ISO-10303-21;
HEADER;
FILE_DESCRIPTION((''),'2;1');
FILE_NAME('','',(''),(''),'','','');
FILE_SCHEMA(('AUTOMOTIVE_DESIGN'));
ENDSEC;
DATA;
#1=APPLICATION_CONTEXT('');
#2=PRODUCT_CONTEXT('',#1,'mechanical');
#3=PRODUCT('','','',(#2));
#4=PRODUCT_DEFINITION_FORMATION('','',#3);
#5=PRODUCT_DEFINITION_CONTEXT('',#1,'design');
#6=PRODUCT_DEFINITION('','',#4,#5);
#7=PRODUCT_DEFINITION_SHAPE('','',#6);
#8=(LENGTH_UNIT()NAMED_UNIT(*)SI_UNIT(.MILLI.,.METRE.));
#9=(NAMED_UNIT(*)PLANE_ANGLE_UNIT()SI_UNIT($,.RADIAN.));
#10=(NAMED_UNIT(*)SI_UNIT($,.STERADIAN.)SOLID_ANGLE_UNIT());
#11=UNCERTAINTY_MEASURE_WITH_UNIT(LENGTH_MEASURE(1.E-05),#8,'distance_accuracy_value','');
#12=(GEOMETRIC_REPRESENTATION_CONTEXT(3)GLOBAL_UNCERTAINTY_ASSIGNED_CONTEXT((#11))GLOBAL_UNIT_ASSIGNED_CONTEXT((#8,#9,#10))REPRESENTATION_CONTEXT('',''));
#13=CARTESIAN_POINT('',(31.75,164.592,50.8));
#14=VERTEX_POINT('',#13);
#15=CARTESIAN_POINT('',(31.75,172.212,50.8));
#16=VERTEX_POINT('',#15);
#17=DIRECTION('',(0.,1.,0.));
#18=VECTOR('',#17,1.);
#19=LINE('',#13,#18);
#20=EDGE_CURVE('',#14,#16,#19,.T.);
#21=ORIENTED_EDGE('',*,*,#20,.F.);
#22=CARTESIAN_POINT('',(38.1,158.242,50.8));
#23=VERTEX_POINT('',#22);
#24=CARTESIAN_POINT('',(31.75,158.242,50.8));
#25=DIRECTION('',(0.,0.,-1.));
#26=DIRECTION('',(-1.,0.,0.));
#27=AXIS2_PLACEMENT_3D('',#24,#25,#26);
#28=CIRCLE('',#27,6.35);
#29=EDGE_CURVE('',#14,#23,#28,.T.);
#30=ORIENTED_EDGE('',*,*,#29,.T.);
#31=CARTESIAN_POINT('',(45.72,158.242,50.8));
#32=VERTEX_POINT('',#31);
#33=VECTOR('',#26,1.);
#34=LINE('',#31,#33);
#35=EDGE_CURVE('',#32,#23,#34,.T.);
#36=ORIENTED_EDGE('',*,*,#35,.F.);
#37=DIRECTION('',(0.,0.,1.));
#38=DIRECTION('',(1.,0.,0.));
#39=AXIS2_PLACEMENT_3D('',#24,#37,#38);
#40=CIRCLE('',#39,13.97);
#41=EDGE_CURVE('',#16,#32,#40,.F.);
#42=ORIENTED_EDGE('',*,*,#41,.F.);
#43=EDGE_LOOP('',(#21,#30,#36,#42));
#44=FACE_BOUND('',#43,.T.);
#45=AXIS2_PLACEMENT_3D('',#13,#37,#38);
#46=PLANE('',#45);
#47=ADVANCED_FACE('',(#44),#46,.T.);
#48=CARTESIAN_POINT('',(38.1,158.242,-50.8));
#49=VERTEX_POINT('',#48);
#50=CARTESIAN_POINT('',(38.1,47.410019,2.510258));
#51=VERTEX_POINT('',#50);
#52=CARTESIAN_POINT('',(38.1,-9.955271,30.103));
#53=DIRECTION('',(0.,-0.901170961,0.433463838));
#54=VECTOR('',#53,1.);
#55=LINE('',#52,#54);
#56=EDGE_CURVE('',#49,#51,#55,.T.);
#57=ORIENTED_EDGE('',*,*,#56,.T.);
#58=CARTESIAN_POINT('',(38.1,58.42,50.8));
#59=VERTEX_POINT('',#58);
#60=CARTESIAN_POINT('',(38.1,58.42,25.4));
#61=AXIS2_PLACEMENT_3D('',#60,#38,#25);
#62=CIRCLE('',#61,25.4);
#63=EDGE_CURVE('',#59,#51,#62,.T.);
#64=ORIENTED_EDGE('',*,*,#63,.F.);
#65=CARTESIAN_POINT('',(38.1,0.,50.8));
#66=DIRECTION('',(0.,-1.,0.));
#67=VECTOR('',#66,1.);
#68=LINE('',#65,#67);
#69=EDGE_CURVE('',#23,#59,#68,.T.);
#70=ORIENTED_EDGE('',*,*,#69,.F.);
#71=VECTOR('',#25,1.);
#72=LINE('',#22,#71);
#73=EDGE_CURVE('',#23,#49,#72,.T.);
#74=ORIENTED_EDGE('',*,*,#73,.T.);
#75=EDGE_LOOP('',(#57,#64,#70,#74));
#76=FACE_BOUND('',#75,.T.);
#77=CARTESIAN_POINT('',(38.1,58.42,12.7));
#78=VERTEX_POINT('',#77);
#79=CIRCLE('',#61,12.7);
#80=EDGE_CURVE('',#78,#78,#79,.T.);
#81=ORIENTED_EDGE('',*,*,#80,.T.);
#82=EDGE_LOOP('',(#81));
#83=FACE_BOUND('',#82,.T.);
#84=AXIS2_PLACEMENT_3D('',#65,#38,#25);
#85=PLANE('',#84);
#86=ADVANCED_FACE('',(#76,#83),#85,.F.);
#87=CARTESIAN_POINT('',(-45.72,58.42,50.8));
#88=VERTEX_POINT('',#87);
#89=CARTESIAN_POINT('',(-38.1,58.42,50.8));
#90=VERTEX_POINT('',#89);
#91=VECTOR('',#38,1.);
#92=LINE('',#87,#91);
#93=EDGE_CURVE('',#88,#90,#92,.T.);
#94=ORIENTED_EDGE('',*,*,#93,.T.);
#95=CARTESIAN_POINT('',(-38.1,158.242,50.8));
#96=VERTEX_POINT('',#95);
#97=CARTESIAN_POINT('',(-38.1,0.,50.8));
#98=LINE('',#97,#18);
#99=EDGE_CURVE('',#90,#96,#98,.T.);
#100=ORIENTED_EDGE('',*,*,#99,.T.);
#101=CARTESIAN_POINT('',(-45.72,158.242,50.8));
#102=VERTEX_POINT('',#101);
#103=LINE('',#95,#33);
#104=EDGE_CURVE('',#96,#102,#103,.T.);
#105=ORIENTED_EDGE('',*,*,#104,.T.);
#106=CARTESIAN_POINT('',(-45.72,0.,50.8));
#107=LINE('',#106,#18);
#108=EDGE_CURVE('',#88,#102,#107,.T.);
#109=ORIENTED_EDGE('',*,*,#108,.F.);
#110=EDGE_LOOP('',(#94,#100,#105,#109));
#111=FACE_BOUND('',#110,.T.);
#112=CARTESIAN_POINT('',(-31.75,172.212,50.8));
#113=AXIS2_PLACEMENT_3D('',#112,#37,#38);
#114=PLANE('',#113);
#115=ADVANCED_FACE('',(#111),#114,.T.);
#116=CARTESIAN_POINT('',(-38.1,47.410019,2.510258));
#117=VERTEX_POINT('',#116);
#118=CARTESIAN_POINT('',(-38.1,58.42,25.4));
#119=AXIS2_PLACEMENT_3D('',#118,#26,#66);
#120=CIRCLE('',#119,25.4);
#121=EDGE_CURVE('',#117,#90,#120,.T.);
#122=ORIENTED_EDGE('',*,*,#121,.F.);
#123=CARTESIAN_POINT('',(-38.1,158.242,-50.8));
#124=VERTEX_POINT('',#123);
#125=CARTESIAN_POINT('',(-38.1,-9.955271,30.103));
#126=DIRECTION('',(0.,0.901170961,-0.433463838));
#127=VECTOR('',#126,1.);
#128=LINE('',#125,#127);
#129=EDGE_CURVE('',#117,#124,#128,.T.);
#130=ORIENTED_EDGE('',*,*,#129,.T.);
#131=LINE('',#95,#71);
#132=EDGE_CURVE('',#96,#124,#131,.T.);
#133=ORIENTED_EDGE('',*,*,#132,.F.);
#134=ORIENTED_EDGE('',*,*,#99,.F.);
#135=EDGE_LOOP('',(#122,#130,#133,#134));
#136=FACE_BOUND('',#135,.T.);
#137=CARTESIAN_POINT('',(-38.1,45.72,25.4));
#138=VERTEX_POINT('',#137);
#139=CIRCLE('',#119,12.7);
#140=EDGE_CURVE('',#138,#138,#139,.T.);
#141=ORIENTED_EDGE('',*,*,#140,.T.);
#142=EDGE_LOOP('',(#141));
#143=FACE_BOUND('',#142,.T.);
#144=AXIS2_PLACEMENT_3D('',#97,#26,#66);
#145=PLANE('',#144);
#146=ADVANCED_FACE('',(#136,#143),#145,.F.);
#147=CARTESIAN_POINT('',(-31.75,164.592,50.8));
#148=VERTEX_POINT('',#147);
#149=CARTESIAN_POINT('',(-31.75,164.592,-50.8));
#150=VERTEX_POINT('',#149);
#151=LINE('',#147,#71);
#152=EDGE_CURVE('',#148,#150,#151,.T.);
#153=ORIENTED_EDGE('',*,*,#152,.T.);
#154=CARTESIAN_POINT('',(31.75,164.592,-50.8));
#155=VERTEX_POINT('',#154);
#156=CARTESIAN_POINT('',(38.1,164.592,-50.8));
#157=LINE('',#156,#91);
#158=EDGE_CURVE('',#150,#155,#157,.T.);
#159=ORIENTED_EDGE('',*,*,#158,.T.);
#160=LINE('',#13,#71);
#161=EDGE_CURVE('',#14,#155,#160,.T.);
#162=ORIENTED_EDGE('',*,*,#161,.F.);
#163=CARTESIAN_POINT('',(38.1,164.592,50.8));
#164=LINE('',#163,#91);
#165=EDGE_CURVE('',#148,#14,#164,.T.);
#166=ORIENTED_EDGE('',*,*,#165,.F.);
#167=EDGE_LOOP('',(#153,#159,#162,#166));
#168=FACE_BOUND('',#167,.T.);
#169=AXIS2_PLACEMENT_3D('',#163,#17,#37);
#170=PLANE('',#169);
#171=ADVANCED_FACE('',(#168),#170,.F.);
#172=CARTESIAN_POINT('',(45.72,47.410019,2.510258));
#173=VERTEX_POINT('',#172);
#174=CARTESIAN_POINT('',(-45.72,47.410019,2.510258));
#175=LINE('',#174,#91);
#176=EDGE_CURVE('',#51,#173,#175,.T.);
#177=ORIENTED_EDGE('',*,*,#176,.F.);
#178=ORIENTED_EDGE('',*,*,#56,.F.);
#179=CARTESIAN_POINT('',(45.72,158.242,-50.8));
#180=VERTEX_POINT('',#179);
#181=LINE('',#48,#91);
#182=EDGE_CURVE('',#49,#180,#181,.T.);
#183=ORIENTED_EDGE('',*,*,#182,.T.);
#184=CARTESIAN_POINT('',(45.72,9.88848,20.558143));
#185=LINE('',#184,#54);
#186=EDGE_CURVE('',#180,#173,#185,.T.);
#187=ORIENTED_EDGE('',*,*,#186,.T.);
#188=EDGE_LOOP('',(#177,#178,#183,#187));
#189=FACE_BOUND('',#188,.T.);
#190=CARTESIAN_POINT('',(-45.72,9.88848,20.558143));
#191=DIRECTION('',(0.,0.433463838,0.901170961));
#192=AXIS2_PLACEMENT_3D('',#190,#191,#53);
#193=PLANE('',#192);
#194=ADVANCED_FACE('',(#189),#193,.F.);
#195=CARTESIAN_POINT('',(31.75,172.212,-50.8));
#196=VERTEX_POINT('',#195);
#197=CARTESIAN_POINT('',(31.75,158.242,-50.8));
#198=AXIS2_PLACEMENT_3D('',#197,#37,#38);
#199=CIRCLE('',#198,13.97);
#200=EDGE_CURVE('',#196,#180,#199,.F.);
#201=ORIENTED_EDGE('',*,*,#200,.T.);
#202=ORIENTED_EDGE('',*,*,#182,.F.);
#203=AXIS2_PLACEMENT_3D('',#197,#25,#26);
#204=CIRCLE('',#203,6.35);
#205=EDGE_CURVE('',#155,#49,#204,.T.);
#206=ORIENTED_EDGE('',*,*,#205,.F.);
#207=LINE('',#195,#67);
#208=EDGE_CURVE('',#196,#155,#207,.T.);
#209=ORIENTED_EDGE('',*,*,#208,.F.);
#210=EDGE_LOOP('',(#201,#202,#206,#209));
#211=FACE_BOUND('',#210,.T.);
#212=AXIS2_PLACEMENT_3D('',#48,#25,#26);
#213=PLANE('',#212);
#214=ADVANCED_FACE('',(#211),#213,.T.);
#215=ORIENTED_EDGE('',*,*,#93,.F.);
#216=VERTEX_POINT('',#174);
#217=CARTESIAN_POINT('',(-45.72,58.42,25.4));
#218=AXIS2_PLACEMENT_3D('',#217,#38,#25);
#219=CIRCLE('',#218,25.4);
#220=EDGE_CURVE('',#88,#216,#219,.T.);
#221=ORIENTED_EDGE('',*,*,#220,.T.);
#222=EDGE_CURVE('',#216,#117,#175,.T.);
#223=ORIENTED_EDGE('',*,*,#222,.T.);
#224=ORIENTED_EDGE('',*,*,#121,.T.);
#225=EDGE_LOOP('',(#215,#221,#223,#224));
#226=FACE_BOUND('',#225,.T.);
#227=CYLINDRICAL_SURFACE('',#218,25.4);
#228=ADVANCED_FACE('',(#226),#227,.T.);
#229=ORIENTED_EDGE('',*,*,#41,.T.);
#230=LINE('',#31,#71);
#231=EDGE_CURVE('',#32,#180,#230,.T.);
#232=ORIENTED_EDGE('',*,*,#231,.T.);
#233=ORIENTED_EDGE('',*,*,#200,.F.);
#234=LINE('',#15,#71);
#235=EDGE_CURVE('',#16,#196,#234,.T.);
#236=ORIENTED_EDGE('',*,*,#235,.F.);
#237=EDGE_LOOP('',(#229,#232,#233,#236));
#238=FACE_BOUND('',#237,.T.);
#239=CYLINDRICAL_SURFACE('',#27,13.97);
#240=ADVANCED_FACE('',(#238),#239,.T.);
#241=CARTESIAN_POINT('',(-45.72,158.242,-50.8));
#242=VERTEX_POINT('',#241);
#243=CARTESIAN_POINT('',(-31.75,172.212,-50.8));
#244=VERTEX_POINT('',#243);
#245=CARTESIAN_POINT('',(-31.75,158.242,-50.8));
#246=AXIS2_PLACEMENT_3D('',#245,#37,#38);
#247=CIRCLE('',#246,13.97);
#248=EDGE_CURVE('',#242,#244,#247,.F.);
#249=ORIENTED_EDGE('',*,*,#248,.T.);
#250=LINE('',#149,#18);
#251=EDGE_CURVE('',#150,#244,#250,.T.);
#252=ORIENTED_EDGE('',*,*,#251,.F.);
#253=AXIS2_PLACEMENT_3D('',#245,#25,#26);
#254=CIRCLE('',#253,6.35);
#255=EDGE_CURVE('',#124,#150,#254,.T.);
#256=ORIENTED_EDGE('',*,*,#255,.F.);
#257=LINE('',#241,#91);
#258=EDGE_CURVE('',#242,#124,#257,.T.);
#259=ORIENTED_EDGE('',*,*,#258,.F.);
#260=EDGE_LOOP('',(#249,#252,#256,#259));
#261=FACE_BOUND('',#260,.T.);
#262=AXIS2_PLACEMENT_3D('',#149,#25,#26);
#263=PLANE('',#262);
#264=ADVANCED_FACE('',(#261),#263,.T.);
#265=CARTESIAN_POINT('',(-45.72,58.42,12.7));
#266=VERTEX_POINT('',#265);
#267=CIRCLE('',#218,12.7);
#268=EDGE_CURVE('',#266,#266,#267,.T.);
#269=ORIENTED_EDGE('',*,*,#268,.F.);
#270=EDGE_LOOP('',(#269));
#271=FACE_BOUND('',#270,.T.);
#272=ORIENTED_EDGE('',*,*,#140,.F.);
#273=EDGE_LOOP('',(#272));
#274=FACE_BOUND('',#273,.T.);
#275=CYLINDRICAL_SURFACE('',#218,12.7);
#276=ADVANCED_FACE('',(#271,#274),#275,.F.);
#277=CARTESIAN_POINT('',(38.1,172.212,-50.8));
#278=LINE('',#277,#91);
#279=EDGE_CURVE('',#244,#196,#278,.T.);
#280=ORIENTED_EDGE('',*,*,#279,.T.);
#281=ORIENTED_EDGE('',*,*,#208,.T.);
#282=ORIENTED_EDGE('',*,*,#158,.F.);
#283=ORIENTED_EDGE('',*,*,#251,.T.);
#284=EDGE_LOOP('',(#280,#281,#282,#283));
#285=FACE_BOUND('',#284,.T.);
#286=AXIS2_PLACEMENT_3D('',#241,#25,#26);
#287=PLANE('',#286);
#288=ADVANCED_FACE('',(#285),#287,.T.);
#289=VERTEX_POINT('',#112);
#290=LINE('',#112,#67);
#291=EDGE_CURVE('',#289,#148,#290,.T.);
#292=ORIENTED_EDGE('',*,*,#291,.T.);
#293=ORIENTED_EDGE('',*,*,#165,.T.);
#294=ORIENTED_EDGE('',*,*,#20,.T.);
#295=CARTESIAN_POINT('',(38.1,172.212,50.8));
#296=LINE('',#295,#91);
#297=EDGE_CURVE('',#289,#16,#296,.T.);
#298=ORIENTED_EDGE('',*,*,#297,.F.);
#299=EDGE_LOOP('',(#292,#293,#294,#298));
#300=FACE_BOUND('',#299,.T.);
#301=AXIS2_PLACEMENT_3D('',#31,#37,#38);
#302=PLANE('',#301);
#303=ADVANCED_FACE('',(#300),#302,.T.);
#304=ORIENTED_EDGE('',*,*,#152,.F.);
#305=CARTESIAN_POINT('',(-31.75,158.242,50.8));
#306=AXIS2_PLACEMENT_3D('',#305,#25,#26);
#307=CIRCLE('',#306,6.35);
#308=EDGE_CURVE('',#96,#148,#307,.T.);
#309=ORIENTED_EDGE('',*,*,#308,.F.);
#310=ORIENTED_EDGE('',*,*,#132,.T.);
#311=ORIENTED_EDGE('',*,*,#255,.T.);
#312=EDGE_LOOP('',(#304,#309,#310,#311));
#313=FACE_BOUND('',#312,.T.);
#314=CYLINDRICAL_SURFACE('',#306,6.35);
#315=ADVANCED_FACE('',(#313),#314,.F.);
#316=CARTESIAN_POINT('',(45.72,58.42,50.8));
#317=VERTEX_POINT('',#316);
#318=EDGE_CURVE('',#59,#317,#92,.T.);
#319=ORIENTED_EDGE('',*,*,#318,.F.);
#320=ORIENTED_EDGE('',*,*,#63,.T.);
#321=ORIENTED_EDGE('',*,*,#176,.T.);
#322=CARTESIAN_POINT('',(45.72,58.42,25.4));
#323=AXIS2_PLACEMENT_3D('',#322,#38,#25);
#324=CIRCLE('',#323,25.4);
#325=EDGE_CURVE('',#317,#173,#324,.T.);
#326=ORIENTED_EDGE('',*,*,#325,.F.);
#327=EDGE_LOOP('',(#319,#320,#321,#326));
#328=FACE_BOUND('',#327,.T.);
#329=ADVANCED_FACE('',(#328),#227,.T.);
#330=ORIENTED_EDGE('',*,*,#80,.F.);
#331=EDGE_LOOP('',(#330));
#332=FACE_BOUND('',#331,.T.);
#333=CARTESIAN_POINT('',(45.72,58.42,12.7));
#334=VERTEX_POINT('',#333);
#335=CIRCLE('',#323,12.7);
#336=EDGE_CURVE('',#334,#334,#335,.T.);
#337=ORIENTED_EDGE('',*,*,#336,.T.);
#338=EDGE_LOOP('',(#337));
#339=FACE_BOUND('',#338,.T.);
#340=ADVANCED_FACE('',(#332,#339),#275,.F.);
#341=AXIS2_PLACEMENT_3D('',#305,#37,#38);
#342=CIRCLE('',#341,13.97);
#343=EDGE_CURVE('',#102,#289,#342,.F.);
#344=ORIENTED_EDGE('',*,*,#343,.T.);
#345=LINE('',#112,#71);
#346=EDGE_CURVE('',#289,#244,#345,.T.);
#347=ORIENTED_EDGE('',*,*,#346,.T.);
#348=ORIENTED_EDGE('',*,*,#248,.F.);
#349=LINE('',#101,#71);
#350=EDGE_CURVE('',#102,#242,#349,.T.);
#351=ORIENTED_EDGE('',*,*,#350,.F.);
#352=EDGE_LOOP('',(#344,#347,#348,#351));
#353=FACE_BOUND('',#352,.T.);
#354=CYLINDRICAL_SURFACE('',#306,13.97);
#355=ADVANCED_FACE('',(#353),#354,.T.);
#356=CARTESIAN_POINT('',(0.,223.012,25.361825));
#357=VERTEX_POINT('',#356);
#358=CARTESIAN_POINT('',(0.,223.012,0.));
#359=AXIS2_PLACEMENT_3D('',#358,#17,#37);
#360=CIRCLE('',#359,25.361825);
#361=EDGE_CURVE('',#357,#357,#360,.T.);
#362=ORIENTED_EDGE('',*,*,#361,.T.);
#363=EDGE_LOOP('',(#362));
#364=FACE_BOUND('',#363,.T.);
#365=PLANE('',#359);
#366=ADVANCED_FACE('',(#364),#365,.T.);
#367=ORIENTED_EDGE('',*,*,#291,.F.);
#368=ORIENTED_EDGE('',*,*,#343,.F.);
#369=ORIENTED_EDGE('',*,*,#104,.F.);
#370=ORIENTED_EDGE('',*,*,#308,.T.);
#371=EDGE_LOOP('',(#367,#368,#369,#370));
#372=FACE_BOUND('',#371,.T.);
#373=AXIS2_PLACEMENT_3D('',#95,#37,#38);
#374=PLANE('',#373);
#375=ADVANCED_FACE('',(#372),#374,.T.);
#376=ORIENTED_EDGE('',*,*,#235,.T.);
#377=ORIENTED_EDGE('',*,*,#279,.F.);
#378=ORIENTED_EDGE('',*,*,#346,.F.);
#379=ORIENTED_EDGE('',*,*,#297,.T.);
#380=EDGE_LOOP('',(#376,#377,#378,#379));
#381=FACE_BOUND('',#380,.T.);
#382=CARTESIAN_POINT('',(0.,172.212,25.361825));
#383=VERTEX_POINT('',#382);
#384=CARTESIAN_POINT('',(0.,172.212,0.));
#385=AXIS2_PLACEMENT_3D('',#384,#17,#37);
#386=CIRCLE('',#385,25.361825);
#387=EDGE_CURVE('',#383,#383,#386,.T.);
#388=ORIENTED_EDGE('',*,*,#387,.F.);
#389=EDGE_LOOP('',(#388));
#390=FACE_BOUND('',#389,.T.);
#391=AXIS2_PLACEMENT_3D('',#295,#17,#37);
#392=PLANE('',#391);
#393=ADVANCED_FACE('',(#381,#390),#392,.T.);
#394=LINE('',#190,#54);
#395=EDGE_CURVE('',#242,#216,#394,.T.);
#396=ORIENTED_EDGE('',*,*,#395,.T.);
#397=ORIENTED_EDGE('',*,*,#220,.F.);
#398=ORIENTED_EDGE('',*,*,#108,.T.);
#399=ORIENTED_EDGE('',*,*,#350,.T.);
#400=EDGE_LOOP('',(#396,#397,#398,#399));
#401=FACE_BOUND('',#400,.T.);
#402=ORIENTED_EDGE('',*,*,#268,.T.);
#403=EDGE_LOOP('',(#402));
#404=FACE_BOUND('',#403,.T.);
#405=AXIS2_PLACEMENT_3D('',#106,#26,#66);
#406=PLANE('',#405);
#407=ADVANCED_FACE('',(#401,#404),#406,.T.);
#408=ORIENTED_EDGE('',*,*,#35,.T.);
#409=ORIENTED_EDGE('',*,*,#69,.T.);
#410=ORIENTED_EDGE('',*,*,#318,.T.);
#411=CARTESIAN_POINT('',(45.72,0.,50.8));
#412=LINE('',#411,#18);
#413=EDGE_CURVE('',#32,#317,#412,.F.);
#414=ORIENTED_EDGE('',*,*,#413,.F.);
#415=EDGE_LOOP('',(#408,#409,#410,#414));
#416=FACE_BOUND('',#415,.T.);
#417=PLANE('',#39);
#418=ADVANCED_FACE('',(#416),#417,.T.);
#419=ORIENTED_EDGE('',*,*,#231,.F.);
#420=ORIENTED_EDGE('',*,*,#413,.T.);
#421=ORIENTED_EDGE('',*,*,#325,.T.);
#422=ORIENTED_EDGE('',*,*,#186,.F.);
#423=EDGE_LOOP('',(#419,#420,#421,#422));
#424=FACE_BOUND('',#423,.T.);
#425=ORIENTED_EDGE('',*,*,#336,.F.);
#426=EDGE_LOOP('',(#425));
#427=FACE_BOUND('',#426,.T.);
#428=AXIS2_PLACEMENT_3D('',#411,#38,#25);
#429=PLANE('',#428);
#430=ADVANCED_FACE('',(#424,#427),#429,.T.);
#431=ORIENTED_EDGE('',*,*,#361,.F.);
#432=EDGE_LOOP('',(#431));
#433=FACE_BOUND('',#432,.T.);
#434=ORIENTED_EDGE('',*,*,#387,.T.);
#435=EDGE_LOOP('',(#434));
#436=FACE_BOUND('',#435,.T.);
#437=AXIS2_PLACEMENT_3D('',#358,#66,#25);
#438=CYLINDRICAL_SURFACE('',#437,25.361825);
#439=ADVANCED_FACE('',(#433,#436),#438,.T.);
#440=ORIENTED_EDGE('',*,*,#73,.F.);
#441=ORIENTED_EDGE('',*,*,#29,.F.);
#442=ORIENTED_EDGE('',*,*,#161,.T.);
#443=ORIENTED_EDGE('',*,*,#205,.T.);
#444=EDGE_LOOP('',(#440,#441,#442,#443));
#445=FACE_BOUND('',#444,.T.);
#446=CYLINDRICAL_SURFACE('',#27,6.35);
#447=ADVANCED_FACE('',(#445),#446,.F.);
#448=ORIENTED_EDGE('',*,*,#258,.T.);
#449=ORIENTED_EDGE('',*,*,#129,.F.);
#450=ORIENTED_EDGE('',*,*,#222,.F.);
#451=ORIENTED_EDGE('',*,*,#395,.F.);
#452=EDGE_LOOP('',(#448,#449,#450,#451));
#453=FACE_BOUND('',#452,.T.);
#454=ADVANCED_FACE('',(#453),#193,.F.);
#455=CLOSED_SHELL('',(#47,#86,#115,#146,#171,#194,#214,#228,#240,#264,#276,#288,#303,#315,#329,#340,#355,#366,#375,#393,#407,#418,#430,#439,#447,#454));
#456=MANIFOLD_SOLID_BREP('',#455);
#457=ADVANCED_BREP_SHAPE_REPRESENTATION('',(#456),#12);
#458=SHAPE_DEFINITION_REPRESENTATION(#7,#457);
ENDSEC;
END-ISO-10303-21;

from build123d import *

# Parameters (mm, degrees)
BASE_FLANGE1_DEPTH  = 50.8
SKETCH8_R           = 12.7
CUT_EXTRUDE2_DEPTH  = 202.491653782
SKETCH9_R           = 25.36182522
BOSS_EXTRUDE1_DEPTH = 50.8


# Sheet-metal steps are written as plain solids
with BuildPart() as part:
    # Sketch2 → Base-Flange1 (new, symmetric)
    with BuildSketch(Plane.XY):
        with BuildLine():
            Line((38.1, 0), (38.1, 158.242))
            ThreePointArc((38.1, 158.242), (36.240128061, 162.732128061), (31.75, 164.592))
            Line((31.75, 164.592), (-31.75, 164.592))
            ThreePointArc((-31.75, 164.592), (-36.240128061, 162.732128061), (-38.1, 158.242))
            Line((-38.1, 158.242), (-38.1, 0))
            Line((-38.1, 0), (-45.72, 0))
            Line((-45.72, 0), (-45.72, 158.242))
            ThreePointArc((-45.72, 158.242), (-41.628281733, 168.120281733), (-31.75, 172.212))
            Line((-31.75, 172.212), (31.75, 172.212))
            ThreePointArc((31.75, 172.212), (41.628281733, 168.120281733), (45.72, 158.242))
            Line((45.72, 158.242), (45.72, 0))
            Line((45.72, 0), (38.1, 0))
        make_face()
    extrude(amount=BASE_FLANGE1_DEPTH, both=True)

    # Sketch8 → Cut-Extrude2 (cut, through all)
    with BuildSketch(Plane(origin=(45.72, 0, 0), x_dir=(0, 0, -1), z_dir=(1, 0, 0))):
        with BuildLine():
            Line((50.8, 0), (50.8, 158.242))
            Line((50.8, 158.242), (-2.510257588, 47.410018515))
            ThreePointArc((-2.510257588, 47.410018515), (-31.046261716, 33.655514771), (-50.8, 58.42))
            Line((-50.8, 58.42), (-50.8, 0))
            Line((-50.8, 0), (50.8, 0))
        make_face()
        with Locations((-25.4, 58.42)):
            Circle(SKETCH8_R)
    extrude(amount=-CUT_EXTRUDE2_DEPTH, mode=Mode.SUBTRACT)

    # Sketch9 → Boss-Extrude1 (add)
    with BuildSketch(Plane(origin=(0, 172.212, 0), x_dir=(1, 0, 0), z_dir=(0, 1, 0))):
        with Locations(Location((0, 0, 0), (0, 0, 270))):
            Circle(SKETCH9_R)
    extrude(amount=BOSS_EXTRUDE1_DEPTH)


solid = part.part
